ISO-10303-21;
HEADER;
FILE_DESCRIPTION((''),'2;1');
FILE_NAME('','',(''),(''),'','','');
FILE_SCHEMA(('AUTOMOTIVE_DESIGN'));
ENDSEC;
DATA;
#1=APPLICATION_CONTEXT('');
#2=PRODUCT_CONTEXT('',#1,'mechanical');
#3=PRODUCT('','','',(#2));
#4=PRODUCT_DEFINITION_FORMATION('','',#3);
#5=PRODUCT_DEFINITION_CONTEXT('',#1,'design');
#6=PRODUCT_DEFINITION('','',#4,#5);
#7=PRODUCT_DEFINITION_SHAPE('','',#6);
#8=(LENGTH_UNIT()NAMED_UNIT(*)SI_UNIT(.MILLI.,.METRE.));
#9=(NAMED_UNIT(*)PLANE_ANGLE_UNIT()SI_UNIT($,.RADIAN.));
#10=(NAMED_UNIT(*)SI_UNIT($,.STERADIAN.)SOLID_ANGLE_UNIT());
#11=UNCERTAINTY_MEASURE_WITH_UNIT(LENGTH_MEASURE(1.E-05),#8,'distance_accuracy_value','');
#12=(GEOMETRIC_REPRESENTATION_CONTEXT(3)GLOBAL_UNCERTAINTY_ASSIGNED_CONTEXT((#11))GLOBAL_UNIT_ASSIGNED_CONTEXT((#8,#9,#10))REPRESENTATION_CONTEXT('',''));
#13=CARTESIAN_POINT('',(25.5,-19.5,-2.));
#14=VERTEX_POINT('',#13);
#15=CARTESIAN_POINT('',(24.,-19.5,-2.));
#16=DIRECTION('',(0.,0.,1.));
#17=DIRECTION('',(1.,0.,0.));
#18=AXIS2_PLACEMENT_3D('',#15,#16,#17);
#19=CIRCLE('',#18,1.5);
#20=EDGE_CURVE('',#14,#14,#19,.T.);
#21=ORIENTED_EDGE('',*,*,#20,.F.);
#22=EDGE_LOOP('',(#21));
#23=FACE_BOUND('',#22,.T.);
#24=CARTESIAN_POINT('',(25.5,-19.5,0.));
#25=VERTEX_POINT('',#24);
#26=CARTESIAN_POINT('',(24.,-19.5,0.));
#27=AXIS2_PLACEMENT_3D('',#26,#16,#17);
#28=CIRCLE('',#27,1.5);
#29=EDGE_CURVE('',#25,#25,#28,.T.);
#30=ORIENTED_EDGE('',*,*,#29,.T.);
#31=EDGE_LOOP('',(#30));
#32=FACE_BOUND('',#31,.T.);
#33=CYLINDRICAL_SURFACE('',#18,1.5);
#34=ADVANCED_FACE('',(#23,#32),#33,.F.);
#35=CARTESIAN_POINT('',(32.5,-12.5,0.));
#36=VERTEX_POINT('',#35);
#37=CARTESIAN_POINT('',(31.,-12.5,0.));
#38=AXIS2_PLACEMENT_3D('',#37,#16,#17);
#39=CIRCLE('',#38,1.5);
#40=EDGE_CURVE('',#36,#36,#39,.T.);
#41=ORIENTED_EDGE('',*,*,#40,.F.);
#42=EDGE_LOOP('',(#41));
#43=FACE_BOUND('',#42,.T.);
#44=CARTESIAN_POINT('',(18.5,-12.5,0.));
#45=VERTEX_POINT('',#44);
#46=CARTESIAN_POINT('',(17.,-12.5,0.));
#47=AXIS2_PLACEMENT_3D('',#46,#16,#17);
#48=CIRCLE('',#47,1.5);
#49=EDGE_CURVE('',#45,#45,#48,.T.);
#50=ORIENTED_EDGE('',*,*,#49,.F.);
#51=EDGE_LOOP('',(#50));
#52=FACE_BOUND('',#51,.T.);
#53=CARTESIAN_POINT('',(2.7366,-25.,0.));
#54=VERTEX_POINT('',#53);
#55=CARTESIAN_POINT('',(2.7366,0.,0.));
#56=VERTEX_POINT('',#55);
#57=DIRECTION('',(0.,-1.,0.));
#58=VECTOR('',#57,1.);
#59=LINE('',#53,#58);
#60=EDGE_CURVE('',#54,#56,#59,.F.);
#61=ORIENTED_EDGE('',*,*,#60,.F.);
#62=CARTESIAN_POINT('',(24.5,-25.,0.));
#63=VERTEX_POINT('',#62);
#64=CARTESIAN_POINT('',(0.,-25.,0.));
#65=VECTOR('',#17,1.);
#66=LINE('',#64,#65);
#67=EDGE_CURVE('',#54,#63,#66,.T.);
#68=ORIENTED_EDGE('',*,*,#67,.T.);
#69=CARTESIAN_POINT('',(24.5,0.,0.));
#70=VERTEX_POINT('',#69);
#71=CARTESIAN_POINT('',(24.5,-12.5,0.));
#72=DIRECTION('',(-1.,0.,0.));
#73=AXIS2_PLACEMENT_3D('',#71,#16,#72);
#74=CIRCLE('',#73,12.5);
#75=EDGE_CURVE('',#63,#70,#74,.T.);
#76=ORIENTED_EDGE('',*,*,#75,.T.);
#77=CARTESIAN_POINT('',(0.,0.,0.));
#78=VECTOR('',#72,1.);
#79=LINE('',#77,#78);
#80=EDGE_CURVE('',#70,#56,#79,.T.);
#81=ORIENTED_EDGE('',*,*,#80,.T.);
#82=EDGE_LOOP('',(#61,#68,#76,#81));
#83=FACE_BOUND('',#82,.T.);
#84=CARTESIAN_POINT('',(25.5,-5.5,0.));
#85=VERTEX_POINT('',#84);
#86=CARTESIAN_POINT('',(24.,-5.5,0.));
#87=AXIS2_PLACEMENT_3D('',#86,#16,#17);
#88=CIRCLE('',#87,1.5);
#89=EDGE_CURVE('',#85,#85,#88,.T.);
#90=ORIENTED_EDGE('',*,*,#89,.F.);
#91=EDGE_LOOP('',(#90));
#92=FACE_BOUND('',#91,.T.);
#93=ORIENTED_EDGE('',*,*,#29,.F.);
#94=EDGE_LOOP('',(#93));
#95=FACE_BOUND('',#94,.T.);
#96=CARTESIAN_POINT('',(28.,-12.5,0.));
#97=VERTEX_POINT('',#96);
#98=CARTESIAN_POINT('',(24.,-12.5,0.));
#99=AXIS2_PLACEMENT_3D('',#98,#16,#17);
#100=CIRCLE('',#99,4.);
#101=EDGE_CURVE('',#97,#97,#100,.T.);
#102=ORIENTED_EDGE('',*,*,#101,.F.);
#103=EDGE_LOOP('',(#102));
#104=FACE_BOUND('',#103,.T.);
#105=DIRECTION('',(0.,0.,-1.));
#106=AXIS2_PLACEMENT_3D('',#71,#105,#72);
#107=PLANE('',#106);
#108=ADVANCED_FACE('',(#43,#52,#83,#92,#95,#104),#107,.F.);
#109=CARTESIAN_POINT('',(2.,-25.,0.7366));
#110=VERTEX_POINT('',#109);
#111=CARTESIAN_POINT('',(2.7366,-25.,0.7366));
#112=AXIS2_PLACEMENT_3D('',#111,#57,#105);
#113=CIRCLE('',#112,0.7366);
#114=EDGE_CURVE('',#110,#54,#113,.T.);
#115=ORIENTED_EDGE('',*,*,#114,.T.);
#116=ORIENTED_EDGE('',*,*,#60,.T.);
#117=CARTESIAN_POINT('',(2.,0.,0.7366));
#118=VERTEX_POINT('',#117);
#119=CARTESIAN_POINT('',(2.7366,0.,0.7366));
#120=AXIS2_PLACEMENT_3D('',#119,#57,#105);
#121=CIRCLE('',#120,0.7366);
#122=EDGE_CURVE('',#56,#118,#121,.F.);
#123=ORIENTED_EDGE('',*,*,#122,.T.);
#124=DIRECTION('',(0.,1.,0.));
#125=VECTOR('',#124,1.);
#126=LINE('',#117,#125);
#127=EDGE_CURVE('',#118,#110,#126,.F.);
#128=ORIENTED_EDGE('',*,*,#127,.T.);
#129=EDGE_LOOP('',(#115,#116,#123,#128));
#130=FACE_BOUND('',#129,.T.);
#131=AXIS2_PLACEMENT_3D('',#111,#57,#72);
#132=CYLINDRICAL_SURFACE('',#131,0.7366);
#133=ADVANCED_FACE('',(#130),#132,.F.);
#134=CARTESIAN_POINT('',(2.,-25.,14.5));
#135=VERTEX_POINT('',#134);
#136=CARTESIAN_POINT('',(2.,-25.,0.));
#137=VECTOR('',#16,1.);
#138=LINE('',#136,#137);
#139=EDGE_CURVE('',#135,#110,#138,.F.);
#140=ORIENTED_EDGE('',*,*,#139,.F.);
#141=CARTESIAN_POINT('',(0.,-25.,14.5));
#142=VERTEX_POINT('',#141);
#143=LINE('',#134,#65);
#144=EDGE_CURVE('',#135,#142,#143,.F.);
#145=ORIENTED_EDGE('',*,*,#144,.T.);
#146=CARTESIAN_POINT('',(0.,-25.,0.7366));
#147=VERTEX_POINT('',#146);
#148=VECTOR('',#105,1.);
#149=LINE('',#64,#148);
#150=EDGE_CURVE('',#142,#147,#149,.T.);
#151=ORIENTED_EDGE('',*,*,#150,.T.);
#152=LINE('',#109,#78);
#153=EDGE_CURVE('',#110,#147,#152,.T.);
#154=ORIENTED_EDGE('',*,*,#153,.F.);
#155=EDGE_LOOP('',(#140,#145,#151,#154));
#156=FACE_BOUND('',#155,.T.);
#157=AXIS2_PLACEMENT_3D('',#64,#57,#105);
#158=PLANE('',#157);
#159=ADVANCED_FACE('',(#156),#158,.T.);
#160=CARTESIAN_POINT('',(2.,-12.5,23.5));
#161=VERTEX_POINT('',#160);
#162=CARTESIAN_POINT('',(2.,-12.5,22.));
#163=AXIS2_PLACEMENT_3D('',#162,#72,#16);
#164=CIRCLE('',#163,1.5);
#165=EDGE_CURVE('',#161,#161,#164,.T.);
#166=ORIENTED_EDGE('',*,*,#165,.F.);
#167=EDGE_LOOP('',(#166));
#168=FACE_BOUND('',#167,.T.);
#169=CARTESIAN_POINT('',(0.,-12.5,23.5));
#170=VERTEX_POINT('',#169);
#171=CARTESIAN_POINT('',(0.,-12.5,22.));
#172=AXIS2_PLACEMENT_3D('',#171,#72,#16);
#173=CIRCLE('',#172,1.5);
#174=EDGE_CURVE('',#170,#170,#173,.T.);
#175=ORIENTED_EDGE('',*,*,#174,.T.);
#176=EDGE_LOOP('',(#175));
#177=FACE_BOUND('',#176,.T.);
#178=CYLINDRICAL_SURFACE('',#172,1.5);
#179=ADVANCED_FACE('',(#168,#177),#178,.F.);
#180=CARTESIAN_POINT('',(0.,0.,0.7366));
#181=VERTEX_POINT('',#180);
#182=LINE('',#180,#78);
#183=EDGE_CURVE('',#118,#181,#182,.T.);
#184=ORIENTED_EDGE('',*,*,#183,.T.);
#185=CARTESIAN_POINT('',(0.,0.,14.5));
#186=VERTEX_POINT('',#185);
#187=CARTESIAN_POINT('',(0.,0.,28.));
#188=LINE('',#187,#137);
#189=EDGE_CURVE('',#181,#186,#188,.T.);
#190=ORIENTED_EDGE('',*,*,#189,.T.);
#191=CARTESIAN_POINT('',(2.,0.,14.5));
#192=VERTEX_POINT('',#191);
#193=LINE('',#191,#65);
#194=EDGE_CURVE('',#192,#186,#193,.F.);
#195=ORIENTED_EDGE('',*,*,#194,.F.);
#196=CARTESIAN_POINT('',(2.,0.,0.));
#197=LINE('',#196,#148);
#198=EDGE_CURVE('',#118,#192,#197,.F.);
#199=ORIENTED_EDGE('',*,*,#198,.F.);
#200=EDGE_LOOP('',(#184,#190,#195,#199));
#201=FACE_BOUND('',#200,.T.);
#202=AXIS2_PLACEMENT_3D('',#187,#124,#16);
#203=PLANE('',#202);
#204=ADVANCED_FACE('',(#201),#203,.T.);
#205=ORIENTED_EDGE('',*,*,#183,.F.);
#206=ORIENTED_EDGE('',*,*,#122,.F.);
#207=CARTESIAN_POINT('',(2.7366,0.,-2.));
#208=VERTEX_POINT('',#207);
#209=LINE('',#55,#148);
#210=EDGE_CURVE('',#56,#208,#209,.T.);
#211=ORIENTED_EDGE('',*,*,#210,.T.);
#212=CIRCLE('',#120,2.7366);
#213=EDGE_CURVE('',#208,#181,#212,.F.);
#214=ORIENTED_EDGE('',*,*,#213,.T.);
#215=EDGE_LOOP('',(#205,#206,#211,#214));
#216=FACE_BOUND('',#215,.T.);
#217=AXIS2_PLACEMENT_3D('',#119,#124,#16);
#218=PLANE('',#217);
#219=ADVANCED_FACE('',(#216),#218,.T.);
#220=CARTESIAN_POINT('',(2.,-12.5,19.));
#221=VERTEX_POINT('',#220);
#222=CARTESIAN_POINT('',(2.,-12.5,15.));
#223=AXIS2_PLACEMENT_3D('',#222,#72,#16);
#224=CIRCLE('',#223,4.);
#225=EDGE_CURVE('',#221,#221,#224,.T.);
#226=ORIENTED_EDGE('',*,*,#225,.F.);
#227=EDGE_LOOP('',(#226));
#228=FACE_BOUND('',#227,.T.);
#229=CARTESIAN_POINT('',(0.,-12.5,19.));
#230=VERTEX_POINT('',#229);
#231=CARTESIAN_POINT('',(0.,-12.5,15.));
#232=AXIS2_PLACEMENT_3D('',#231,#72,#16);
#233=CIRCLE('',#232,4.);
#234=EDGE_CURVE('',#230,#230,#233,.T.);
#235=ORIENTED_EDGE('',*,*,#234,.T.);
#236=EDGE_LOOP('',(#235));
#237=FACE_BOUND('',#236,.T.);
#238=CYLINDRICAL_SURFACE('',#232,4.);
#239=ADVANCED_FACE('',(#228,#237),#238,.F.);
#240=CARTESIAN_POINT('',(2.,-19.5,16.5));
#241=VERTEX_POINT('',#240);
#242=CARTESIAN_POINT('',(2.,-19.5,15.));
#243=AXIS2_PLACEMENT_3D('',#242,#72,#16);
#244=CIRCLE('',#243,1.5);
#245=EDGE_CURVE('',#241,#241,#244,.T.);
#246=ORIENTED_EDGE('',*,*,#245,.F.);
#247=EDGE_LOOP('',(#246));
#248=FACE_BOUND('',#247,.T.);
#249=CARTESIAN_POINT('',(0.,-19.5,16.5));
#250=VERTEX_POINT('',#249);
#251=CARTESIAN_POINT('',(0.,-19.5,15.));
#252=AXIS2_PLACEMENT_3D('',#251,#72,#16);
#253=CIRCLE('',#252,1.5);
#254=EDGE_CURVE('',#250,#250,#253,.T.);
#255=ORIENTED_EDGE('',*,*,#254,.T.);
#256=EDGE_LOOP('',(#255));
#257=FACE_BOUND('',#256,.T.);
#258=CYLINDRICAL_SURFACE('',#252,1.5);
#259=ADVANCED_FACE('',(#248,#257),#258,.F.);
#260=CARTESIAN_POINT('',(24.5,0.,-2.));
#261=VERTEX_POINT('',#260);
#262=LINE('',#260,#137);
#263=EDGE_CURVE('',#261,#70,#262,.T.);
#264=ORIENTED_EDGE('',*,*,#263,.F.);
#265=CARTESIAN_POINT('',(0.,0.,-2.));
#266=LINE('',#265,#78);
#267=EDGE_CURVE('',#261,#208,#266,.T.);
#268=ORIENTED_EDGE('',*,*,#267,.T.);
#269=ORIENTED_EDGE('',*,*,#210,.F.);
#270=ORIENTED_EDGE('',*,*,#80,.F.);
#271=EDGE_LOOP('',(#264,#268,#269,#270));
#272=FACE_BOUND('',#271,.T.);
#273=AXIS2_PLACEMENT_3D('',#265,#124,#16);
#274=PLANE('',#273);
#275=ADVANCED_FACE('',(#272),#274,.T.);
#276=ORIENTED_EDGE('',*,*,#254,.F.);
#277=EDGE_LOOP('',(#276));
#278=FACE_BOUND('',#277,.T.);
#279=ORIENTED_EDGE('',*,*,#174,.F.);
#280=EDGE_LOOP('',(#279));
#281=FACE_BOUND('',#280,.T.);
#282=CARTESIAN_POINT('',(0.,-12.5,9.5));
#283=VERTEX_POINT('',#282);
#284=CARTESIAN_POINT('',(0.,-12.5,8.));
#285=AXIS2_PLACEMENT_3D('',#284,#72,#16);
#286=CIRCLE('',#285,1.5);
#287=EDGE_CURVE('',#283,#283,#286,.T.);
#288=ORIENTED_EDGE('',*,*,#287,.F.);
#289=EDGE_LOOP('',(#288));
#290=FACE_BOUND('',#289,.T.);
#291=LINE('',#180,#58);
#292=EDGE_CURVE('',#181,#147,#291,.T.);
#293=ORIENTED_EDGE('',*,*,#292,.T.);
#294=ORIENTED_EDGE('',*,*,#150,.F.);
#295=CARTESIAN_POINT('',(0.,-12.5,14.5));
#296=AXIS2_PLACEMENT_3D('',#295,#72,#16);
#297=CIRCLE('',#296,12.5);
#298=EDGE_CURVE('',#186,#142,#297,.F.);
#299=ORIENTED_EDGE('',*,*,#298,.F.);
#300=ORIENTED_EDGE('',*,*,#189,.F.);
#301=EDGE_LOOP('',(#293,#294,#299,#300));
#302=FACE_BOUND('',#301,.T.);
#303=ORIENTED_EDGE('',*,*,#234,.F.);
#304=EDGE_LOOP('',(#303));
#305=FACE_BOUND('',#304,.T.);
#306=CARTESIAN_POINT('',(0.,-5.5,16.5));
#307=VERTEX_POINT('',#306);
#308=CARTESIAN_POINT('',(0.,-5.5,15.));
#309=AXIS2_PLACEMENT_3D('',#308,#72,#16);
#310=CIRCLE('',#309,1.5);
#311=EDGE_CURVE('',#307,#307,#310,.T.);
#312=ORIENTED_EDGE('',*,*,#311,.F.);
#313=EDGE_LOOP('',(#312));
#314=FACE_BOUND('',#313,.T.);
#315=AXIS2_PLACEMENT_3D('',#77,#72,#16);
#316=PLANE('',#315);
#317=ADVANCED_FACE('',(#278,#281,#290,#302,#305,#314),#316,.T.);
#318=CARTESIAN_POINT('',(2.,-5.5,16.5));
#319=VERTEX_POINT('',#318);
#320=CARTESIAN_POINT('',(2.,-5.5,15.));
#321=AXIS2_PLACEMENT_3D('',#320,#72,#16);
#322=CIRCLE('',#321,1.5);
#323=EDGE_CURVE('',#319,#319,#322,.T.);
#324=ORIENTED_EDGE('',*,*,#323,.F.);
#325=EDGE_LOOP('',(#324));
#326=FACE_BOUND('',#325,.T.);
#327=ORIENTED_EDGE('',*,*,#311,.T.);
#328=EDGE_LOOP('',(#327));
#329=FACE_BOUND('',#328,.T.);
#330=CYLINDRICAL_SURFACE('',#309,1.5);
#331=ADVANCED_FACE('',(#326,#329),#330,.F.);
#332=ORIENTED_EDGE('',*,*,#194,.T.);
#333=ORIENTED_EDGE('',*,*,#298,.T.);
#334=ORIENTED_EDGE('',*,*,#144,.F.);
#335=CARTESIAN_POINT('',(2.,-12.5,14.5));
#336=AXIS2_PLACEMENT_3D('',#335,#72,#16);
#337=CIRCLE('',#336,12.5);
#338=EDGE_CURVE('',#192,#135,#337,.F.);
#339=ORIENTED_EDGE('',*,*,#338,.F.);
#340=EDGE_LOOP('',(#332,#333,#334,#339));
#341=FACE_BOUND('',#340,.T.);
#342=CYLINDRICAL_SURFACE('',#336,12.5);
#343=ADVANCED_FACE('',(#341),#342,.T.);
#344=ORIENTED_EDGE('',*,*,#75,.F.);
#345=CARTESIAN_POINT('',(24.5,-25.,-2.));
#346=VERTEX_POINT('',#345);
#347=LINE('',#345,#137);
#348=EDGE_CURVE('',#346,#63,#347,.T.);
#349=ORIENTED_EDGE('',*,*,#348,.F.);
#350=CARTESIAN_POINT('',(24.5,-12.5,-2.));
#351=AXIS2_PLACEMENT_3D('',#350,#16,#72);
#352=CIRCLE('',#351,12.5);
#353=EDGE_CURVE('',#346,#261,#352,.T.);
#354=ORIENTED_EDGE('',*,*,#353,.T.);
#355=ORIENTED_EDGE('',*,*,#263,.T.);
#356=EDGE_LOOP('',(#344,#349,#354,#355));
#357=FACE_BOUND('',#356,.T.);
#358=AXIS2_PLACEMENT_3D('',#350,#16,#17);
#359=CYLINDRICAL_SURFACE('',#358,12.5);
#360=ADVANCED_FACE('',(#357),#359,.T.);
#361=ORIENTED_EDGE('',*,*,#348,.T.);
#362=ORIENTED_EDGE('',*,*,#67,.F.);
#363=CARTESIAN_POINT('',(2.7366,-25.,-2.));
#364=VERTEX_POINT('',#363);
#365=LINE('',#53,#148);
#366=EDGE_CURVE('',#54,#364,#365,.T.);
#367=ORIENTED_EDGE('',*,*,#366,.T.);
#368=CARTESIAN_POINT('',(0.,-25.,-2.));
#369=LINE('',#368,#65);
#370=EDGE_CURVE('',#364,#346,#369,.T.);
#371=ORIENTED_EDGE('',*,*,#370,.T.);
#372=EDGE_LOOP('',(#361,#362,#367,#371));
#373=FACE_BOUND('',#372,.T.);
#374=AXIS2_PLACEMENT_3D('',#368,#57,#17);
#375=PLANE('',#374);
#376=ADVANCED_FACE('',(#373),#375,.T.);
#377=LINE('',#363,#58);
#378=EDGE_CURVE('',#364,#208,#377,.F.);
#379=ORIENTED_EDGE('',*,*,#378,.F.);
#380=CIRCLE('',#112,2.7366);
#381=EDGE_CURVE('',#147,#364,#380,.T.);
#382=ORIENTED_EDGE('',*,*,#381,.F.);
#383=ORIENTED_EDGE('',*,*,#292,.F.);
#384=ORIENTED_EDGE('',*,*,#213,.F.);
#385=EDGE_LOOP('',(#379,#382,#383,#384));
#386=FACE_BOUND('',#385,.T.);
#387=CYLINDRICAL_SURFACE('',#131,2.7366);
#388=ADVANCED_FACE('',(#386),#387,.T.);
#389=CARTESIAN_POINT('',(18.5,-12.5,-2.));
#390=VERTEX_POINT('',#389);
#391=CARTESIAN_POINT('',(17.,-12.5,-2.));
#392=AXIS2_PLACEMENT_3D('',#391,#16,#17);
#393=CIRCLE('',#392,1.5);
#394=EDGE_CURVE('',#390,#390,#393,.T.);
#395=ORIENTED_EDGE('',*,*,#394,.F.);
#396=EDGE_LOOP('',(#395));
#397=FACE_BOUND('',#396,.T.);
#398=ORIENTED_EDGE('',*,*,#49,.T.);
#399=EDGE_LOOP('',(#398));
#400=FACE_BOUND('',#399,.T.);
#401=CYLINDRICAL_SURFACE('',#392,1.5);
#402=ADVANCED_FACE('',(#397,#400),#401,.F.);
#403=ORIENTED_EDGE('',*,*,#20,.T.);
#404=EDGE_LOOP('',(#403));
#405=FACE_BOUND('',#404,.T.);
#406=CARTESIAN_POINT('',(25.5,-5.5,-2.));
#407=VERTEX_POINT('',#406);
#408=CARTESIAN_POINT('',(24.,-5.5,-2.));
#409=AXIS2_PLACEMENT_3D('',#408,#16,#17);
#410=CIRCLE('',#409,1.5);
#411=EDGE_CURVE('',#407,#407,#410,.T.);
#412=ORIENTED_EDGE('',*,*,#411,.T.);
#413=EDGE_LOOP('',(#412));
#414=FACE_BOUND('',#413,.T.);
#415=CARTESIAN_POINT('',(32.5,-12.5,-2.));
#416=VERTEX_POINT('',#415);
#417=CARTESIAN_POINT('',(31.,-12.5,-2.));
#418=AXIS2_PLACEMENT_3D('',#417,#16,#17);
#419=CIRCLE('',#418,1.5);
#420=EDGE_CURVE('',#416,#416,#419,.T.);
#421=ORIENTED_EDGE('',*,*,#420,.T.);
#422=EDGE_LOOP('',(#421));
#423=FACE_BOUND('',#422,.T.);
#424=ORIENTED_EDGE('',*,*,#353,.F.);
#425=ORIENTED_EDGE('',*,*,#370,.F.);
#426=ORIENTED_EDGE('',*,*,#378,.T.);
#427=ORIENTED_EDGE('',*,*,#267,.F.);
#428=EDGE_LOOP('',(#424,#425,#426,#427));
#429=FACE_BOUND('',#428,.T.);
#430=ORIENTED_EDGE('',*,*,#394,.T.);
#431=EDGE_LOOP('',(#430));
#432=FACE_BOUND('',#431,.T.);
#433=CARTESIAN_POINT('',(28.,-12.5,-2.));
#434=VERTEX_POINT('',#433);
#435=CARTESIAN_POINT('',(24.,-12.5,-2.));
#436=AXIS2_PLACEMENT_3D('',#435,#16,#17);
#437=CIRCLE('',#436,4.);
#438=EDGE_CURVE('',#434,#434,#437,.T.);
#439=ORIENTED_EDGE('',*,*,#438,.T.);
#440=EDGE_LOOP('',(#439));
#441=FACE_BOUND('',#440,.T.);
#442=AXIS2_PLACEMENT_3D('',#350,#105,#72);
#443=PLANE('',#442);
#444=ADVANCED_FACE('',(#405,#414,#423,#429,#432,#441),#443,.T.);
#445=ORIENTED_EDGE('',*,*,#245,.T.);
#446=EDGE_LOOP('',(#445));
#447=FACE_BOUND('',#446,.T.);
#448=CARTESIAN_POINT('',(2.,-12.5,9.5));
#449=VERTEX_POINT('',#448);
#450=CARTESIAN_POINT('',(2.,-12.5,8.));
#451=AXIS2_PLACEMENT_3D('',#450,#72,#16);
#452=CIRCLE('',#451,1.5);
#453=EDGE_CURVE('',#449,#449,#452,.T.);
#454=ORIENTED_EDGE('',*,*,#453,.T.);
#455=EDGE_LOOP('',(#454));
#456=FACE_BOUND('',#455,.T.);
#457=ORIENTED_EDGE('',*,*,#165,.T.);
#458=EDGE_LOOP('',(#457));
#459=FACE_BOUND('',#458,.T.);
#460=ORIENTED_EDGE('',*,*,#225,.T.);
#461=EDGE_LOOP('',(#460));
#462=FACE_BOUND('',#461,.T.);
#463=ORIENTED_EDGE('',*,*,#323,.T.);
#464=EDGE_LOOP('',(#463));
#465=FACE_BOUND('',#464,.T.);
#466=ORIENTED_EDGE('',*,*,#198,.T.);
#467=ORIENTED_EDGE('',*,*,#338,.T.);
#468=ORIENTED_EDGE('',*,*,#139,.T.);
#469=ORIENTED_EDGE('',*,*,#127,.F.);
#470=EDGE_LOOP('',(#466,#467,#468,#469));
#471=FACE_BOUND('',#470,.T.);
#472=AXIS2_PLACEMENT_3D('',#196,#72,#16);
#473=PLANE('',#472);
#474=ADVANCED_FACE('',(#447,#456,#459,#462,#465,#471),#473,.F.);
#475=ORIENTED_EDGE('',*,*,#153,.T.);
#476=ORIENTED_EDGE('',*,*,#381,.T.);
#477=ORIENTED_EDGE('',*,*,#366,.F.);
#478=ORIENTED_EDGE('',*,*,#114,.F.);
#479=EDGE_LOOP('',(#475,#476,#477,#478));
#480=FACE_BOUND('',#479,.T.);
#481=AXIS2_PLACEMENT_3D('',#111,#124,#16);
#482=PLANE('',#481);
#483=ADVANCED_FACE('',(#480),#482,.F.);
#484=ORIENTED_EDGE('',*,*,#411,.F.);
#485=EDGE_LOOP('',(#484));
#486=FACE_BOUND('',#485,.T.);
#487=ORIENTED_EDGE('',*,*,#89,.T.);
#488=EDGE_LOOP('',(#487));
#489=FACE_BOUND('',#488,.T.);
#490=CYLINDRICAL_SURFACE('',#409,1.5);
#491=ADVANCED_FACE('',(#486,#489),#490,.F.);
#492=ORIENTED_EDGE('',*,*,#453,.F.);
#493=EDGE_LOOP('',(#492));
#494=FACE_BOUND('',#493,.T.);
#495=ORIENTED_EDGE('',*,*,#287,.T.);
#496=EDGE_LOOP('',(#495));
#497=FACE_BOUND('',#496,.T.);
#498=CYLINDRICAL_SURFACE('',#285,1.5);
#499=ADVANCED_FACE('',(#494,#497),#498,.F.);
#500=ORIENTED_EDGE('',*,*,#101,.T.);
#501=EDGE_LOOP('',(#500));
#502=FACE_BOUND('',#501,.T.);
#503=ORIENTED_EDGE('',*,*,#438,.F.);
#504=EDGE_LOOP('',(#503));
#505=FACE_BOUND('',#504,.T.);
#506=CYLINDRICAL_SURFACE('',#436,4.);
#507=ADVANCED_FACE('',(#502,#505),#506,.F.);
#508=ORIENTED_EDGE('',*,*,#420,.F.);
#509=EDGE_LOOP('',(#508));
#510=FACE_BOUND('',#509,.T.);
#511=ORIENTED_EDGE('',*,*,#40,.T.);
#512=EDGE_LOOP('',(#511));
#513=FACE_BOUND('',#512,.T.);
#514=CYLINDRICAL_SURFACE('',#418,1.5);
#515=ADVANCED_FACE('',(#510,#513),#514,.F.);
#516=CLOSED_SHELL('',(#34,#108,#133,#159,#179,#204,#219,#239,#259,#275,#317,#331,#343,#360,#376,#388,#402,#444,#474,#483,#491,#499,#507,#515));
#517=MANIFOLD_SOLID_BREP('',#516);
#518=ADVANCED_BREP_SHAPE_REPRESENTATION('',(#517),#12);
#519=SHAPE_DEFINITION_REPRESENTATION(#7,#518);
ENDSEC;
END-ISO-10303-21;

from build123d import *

# Parameters (mm, degrees)
SKETCH_1_R                       = 4
SKETCH_1_R_2                     = 1.5
SM_BASE_FLANGE_1_DEPTH           = 2
SM_EDGE_FLANGE_1_STRIP_W         = 9.4732
SM_EDGE_FLANGE_1_STRIP_H         = 2
SM_EDGE_FLANGE_1_STRIP_CUT_DEPTH = 25
SM_EDGE_FLANGE_1_DEPTH           = 25
SKETCH_9_R                       = 4
SKETCH_9_R_2                     = 1.5
CUT_EXTRUDE_1_DEPTH              = 10


# Sheet-metal steps are written as plain solids
with BuildPart() as part:
    # Sketch 1 → 基体-法兰1 (new body)
    with BuildSketch(Plane.XY):
        with BuildLine():
            Line((0, 0), (0, -25))
            Line((0, -25), (24.5, -25))
            ThreePointArc((24.5, -25), (37, -12.5), (24.5, 0))
            Line((24.5, 0), (0, 0))
        make_face()
        with Locations((24, -12.5)):
            Circle(SKETCH_1_R, mode=Mode.SUBTRACT)
        with Locations((17, -12.5)):
            Circle(SKETCH_1_R_2, mode=Mode.SUBTRACT)
        with Locations((31, -12.5)):
            Circle(SKETCH_1_R_2, mode=Mode.SUBTRACT)
        with Locations((24, -19.5)):
            Circle(SKETCH_1_R_2, mode=Mode.SUBTRACT)
        with Locations((24, -5.5)):
            Circle(SKETCH_1_R_2, mode=Mode.SUBTRACT)
    extrude(amount=-SM_BASE_FLANGE_1_DEPTH)

    # 边线-法兰1 strip (across the edge) → 边线-法兰1 strip cut (cut)
    with BuildSketch(Plane.XZ):
        with Locations((-2, -1)):
            Rectangle(SM_EDGE_FLANGE_1_STRIP_W, SM_EDGE_FLANGE_1_STRIP_H)
    extrude(amount=SM_EDGE_FLANGE_1_STRIP_CUT_DEPTH, mode=Mode.SUBTRACT)

    # 边线-法兰1 section (across the edge) → 边线-法兰1 (add)
    with BuildSketch(Plane.XZ):
        with BuildLine():
            Line((0, 0.7366), (0, 28))
            Line((0, 28), (2, 28))
            Line((2, 28), (2, 0.7366))
            ThreePointArc((2, 0.7366), (2.215745145, 0.215745145), (2.7366, 0))
            Line((2.7366, 0), (2.7366, -2))
            ThreePointArc((2.7366, -2), (0.801531583, -1.198468417), (0, 0.7366))
        make_face()
    extrude(amount=SM_EDGE_FLANGE_1_DEPTH)

    # 草图9 → 切除-拉伸1 (cut)
    with BuildSketch(Plane.ZY):
        with Locations((15, -12.5)):
            Circle(SKETCH_9_R)
        with Locations((22, -12.5)):
            Circle(SKETCH_9_R_2)
        with Locations((8, -12.5)):
            Circle(SKETCH_9_R_2)
        with Locations((15, -19.5)):
            Circle(SKETCH_9_R_2)
        with Locations((15, -5.5)):
            Circle(SKETCH_9_R_2)
        with BuildLine():
            Line((14.5, 0), (28, 0))
            Line((28, 0), (28, -25))
            Line((28, -25), (14.5, -25))
            ThreePointArc((14.5, -25), (27, -12.5), (14.5, 0))
        make_face()
    extrude(amount=-CUT_EXTRUDE_1_DEPTH, mode=Mode.SUBTRACT)


solid = part.part
